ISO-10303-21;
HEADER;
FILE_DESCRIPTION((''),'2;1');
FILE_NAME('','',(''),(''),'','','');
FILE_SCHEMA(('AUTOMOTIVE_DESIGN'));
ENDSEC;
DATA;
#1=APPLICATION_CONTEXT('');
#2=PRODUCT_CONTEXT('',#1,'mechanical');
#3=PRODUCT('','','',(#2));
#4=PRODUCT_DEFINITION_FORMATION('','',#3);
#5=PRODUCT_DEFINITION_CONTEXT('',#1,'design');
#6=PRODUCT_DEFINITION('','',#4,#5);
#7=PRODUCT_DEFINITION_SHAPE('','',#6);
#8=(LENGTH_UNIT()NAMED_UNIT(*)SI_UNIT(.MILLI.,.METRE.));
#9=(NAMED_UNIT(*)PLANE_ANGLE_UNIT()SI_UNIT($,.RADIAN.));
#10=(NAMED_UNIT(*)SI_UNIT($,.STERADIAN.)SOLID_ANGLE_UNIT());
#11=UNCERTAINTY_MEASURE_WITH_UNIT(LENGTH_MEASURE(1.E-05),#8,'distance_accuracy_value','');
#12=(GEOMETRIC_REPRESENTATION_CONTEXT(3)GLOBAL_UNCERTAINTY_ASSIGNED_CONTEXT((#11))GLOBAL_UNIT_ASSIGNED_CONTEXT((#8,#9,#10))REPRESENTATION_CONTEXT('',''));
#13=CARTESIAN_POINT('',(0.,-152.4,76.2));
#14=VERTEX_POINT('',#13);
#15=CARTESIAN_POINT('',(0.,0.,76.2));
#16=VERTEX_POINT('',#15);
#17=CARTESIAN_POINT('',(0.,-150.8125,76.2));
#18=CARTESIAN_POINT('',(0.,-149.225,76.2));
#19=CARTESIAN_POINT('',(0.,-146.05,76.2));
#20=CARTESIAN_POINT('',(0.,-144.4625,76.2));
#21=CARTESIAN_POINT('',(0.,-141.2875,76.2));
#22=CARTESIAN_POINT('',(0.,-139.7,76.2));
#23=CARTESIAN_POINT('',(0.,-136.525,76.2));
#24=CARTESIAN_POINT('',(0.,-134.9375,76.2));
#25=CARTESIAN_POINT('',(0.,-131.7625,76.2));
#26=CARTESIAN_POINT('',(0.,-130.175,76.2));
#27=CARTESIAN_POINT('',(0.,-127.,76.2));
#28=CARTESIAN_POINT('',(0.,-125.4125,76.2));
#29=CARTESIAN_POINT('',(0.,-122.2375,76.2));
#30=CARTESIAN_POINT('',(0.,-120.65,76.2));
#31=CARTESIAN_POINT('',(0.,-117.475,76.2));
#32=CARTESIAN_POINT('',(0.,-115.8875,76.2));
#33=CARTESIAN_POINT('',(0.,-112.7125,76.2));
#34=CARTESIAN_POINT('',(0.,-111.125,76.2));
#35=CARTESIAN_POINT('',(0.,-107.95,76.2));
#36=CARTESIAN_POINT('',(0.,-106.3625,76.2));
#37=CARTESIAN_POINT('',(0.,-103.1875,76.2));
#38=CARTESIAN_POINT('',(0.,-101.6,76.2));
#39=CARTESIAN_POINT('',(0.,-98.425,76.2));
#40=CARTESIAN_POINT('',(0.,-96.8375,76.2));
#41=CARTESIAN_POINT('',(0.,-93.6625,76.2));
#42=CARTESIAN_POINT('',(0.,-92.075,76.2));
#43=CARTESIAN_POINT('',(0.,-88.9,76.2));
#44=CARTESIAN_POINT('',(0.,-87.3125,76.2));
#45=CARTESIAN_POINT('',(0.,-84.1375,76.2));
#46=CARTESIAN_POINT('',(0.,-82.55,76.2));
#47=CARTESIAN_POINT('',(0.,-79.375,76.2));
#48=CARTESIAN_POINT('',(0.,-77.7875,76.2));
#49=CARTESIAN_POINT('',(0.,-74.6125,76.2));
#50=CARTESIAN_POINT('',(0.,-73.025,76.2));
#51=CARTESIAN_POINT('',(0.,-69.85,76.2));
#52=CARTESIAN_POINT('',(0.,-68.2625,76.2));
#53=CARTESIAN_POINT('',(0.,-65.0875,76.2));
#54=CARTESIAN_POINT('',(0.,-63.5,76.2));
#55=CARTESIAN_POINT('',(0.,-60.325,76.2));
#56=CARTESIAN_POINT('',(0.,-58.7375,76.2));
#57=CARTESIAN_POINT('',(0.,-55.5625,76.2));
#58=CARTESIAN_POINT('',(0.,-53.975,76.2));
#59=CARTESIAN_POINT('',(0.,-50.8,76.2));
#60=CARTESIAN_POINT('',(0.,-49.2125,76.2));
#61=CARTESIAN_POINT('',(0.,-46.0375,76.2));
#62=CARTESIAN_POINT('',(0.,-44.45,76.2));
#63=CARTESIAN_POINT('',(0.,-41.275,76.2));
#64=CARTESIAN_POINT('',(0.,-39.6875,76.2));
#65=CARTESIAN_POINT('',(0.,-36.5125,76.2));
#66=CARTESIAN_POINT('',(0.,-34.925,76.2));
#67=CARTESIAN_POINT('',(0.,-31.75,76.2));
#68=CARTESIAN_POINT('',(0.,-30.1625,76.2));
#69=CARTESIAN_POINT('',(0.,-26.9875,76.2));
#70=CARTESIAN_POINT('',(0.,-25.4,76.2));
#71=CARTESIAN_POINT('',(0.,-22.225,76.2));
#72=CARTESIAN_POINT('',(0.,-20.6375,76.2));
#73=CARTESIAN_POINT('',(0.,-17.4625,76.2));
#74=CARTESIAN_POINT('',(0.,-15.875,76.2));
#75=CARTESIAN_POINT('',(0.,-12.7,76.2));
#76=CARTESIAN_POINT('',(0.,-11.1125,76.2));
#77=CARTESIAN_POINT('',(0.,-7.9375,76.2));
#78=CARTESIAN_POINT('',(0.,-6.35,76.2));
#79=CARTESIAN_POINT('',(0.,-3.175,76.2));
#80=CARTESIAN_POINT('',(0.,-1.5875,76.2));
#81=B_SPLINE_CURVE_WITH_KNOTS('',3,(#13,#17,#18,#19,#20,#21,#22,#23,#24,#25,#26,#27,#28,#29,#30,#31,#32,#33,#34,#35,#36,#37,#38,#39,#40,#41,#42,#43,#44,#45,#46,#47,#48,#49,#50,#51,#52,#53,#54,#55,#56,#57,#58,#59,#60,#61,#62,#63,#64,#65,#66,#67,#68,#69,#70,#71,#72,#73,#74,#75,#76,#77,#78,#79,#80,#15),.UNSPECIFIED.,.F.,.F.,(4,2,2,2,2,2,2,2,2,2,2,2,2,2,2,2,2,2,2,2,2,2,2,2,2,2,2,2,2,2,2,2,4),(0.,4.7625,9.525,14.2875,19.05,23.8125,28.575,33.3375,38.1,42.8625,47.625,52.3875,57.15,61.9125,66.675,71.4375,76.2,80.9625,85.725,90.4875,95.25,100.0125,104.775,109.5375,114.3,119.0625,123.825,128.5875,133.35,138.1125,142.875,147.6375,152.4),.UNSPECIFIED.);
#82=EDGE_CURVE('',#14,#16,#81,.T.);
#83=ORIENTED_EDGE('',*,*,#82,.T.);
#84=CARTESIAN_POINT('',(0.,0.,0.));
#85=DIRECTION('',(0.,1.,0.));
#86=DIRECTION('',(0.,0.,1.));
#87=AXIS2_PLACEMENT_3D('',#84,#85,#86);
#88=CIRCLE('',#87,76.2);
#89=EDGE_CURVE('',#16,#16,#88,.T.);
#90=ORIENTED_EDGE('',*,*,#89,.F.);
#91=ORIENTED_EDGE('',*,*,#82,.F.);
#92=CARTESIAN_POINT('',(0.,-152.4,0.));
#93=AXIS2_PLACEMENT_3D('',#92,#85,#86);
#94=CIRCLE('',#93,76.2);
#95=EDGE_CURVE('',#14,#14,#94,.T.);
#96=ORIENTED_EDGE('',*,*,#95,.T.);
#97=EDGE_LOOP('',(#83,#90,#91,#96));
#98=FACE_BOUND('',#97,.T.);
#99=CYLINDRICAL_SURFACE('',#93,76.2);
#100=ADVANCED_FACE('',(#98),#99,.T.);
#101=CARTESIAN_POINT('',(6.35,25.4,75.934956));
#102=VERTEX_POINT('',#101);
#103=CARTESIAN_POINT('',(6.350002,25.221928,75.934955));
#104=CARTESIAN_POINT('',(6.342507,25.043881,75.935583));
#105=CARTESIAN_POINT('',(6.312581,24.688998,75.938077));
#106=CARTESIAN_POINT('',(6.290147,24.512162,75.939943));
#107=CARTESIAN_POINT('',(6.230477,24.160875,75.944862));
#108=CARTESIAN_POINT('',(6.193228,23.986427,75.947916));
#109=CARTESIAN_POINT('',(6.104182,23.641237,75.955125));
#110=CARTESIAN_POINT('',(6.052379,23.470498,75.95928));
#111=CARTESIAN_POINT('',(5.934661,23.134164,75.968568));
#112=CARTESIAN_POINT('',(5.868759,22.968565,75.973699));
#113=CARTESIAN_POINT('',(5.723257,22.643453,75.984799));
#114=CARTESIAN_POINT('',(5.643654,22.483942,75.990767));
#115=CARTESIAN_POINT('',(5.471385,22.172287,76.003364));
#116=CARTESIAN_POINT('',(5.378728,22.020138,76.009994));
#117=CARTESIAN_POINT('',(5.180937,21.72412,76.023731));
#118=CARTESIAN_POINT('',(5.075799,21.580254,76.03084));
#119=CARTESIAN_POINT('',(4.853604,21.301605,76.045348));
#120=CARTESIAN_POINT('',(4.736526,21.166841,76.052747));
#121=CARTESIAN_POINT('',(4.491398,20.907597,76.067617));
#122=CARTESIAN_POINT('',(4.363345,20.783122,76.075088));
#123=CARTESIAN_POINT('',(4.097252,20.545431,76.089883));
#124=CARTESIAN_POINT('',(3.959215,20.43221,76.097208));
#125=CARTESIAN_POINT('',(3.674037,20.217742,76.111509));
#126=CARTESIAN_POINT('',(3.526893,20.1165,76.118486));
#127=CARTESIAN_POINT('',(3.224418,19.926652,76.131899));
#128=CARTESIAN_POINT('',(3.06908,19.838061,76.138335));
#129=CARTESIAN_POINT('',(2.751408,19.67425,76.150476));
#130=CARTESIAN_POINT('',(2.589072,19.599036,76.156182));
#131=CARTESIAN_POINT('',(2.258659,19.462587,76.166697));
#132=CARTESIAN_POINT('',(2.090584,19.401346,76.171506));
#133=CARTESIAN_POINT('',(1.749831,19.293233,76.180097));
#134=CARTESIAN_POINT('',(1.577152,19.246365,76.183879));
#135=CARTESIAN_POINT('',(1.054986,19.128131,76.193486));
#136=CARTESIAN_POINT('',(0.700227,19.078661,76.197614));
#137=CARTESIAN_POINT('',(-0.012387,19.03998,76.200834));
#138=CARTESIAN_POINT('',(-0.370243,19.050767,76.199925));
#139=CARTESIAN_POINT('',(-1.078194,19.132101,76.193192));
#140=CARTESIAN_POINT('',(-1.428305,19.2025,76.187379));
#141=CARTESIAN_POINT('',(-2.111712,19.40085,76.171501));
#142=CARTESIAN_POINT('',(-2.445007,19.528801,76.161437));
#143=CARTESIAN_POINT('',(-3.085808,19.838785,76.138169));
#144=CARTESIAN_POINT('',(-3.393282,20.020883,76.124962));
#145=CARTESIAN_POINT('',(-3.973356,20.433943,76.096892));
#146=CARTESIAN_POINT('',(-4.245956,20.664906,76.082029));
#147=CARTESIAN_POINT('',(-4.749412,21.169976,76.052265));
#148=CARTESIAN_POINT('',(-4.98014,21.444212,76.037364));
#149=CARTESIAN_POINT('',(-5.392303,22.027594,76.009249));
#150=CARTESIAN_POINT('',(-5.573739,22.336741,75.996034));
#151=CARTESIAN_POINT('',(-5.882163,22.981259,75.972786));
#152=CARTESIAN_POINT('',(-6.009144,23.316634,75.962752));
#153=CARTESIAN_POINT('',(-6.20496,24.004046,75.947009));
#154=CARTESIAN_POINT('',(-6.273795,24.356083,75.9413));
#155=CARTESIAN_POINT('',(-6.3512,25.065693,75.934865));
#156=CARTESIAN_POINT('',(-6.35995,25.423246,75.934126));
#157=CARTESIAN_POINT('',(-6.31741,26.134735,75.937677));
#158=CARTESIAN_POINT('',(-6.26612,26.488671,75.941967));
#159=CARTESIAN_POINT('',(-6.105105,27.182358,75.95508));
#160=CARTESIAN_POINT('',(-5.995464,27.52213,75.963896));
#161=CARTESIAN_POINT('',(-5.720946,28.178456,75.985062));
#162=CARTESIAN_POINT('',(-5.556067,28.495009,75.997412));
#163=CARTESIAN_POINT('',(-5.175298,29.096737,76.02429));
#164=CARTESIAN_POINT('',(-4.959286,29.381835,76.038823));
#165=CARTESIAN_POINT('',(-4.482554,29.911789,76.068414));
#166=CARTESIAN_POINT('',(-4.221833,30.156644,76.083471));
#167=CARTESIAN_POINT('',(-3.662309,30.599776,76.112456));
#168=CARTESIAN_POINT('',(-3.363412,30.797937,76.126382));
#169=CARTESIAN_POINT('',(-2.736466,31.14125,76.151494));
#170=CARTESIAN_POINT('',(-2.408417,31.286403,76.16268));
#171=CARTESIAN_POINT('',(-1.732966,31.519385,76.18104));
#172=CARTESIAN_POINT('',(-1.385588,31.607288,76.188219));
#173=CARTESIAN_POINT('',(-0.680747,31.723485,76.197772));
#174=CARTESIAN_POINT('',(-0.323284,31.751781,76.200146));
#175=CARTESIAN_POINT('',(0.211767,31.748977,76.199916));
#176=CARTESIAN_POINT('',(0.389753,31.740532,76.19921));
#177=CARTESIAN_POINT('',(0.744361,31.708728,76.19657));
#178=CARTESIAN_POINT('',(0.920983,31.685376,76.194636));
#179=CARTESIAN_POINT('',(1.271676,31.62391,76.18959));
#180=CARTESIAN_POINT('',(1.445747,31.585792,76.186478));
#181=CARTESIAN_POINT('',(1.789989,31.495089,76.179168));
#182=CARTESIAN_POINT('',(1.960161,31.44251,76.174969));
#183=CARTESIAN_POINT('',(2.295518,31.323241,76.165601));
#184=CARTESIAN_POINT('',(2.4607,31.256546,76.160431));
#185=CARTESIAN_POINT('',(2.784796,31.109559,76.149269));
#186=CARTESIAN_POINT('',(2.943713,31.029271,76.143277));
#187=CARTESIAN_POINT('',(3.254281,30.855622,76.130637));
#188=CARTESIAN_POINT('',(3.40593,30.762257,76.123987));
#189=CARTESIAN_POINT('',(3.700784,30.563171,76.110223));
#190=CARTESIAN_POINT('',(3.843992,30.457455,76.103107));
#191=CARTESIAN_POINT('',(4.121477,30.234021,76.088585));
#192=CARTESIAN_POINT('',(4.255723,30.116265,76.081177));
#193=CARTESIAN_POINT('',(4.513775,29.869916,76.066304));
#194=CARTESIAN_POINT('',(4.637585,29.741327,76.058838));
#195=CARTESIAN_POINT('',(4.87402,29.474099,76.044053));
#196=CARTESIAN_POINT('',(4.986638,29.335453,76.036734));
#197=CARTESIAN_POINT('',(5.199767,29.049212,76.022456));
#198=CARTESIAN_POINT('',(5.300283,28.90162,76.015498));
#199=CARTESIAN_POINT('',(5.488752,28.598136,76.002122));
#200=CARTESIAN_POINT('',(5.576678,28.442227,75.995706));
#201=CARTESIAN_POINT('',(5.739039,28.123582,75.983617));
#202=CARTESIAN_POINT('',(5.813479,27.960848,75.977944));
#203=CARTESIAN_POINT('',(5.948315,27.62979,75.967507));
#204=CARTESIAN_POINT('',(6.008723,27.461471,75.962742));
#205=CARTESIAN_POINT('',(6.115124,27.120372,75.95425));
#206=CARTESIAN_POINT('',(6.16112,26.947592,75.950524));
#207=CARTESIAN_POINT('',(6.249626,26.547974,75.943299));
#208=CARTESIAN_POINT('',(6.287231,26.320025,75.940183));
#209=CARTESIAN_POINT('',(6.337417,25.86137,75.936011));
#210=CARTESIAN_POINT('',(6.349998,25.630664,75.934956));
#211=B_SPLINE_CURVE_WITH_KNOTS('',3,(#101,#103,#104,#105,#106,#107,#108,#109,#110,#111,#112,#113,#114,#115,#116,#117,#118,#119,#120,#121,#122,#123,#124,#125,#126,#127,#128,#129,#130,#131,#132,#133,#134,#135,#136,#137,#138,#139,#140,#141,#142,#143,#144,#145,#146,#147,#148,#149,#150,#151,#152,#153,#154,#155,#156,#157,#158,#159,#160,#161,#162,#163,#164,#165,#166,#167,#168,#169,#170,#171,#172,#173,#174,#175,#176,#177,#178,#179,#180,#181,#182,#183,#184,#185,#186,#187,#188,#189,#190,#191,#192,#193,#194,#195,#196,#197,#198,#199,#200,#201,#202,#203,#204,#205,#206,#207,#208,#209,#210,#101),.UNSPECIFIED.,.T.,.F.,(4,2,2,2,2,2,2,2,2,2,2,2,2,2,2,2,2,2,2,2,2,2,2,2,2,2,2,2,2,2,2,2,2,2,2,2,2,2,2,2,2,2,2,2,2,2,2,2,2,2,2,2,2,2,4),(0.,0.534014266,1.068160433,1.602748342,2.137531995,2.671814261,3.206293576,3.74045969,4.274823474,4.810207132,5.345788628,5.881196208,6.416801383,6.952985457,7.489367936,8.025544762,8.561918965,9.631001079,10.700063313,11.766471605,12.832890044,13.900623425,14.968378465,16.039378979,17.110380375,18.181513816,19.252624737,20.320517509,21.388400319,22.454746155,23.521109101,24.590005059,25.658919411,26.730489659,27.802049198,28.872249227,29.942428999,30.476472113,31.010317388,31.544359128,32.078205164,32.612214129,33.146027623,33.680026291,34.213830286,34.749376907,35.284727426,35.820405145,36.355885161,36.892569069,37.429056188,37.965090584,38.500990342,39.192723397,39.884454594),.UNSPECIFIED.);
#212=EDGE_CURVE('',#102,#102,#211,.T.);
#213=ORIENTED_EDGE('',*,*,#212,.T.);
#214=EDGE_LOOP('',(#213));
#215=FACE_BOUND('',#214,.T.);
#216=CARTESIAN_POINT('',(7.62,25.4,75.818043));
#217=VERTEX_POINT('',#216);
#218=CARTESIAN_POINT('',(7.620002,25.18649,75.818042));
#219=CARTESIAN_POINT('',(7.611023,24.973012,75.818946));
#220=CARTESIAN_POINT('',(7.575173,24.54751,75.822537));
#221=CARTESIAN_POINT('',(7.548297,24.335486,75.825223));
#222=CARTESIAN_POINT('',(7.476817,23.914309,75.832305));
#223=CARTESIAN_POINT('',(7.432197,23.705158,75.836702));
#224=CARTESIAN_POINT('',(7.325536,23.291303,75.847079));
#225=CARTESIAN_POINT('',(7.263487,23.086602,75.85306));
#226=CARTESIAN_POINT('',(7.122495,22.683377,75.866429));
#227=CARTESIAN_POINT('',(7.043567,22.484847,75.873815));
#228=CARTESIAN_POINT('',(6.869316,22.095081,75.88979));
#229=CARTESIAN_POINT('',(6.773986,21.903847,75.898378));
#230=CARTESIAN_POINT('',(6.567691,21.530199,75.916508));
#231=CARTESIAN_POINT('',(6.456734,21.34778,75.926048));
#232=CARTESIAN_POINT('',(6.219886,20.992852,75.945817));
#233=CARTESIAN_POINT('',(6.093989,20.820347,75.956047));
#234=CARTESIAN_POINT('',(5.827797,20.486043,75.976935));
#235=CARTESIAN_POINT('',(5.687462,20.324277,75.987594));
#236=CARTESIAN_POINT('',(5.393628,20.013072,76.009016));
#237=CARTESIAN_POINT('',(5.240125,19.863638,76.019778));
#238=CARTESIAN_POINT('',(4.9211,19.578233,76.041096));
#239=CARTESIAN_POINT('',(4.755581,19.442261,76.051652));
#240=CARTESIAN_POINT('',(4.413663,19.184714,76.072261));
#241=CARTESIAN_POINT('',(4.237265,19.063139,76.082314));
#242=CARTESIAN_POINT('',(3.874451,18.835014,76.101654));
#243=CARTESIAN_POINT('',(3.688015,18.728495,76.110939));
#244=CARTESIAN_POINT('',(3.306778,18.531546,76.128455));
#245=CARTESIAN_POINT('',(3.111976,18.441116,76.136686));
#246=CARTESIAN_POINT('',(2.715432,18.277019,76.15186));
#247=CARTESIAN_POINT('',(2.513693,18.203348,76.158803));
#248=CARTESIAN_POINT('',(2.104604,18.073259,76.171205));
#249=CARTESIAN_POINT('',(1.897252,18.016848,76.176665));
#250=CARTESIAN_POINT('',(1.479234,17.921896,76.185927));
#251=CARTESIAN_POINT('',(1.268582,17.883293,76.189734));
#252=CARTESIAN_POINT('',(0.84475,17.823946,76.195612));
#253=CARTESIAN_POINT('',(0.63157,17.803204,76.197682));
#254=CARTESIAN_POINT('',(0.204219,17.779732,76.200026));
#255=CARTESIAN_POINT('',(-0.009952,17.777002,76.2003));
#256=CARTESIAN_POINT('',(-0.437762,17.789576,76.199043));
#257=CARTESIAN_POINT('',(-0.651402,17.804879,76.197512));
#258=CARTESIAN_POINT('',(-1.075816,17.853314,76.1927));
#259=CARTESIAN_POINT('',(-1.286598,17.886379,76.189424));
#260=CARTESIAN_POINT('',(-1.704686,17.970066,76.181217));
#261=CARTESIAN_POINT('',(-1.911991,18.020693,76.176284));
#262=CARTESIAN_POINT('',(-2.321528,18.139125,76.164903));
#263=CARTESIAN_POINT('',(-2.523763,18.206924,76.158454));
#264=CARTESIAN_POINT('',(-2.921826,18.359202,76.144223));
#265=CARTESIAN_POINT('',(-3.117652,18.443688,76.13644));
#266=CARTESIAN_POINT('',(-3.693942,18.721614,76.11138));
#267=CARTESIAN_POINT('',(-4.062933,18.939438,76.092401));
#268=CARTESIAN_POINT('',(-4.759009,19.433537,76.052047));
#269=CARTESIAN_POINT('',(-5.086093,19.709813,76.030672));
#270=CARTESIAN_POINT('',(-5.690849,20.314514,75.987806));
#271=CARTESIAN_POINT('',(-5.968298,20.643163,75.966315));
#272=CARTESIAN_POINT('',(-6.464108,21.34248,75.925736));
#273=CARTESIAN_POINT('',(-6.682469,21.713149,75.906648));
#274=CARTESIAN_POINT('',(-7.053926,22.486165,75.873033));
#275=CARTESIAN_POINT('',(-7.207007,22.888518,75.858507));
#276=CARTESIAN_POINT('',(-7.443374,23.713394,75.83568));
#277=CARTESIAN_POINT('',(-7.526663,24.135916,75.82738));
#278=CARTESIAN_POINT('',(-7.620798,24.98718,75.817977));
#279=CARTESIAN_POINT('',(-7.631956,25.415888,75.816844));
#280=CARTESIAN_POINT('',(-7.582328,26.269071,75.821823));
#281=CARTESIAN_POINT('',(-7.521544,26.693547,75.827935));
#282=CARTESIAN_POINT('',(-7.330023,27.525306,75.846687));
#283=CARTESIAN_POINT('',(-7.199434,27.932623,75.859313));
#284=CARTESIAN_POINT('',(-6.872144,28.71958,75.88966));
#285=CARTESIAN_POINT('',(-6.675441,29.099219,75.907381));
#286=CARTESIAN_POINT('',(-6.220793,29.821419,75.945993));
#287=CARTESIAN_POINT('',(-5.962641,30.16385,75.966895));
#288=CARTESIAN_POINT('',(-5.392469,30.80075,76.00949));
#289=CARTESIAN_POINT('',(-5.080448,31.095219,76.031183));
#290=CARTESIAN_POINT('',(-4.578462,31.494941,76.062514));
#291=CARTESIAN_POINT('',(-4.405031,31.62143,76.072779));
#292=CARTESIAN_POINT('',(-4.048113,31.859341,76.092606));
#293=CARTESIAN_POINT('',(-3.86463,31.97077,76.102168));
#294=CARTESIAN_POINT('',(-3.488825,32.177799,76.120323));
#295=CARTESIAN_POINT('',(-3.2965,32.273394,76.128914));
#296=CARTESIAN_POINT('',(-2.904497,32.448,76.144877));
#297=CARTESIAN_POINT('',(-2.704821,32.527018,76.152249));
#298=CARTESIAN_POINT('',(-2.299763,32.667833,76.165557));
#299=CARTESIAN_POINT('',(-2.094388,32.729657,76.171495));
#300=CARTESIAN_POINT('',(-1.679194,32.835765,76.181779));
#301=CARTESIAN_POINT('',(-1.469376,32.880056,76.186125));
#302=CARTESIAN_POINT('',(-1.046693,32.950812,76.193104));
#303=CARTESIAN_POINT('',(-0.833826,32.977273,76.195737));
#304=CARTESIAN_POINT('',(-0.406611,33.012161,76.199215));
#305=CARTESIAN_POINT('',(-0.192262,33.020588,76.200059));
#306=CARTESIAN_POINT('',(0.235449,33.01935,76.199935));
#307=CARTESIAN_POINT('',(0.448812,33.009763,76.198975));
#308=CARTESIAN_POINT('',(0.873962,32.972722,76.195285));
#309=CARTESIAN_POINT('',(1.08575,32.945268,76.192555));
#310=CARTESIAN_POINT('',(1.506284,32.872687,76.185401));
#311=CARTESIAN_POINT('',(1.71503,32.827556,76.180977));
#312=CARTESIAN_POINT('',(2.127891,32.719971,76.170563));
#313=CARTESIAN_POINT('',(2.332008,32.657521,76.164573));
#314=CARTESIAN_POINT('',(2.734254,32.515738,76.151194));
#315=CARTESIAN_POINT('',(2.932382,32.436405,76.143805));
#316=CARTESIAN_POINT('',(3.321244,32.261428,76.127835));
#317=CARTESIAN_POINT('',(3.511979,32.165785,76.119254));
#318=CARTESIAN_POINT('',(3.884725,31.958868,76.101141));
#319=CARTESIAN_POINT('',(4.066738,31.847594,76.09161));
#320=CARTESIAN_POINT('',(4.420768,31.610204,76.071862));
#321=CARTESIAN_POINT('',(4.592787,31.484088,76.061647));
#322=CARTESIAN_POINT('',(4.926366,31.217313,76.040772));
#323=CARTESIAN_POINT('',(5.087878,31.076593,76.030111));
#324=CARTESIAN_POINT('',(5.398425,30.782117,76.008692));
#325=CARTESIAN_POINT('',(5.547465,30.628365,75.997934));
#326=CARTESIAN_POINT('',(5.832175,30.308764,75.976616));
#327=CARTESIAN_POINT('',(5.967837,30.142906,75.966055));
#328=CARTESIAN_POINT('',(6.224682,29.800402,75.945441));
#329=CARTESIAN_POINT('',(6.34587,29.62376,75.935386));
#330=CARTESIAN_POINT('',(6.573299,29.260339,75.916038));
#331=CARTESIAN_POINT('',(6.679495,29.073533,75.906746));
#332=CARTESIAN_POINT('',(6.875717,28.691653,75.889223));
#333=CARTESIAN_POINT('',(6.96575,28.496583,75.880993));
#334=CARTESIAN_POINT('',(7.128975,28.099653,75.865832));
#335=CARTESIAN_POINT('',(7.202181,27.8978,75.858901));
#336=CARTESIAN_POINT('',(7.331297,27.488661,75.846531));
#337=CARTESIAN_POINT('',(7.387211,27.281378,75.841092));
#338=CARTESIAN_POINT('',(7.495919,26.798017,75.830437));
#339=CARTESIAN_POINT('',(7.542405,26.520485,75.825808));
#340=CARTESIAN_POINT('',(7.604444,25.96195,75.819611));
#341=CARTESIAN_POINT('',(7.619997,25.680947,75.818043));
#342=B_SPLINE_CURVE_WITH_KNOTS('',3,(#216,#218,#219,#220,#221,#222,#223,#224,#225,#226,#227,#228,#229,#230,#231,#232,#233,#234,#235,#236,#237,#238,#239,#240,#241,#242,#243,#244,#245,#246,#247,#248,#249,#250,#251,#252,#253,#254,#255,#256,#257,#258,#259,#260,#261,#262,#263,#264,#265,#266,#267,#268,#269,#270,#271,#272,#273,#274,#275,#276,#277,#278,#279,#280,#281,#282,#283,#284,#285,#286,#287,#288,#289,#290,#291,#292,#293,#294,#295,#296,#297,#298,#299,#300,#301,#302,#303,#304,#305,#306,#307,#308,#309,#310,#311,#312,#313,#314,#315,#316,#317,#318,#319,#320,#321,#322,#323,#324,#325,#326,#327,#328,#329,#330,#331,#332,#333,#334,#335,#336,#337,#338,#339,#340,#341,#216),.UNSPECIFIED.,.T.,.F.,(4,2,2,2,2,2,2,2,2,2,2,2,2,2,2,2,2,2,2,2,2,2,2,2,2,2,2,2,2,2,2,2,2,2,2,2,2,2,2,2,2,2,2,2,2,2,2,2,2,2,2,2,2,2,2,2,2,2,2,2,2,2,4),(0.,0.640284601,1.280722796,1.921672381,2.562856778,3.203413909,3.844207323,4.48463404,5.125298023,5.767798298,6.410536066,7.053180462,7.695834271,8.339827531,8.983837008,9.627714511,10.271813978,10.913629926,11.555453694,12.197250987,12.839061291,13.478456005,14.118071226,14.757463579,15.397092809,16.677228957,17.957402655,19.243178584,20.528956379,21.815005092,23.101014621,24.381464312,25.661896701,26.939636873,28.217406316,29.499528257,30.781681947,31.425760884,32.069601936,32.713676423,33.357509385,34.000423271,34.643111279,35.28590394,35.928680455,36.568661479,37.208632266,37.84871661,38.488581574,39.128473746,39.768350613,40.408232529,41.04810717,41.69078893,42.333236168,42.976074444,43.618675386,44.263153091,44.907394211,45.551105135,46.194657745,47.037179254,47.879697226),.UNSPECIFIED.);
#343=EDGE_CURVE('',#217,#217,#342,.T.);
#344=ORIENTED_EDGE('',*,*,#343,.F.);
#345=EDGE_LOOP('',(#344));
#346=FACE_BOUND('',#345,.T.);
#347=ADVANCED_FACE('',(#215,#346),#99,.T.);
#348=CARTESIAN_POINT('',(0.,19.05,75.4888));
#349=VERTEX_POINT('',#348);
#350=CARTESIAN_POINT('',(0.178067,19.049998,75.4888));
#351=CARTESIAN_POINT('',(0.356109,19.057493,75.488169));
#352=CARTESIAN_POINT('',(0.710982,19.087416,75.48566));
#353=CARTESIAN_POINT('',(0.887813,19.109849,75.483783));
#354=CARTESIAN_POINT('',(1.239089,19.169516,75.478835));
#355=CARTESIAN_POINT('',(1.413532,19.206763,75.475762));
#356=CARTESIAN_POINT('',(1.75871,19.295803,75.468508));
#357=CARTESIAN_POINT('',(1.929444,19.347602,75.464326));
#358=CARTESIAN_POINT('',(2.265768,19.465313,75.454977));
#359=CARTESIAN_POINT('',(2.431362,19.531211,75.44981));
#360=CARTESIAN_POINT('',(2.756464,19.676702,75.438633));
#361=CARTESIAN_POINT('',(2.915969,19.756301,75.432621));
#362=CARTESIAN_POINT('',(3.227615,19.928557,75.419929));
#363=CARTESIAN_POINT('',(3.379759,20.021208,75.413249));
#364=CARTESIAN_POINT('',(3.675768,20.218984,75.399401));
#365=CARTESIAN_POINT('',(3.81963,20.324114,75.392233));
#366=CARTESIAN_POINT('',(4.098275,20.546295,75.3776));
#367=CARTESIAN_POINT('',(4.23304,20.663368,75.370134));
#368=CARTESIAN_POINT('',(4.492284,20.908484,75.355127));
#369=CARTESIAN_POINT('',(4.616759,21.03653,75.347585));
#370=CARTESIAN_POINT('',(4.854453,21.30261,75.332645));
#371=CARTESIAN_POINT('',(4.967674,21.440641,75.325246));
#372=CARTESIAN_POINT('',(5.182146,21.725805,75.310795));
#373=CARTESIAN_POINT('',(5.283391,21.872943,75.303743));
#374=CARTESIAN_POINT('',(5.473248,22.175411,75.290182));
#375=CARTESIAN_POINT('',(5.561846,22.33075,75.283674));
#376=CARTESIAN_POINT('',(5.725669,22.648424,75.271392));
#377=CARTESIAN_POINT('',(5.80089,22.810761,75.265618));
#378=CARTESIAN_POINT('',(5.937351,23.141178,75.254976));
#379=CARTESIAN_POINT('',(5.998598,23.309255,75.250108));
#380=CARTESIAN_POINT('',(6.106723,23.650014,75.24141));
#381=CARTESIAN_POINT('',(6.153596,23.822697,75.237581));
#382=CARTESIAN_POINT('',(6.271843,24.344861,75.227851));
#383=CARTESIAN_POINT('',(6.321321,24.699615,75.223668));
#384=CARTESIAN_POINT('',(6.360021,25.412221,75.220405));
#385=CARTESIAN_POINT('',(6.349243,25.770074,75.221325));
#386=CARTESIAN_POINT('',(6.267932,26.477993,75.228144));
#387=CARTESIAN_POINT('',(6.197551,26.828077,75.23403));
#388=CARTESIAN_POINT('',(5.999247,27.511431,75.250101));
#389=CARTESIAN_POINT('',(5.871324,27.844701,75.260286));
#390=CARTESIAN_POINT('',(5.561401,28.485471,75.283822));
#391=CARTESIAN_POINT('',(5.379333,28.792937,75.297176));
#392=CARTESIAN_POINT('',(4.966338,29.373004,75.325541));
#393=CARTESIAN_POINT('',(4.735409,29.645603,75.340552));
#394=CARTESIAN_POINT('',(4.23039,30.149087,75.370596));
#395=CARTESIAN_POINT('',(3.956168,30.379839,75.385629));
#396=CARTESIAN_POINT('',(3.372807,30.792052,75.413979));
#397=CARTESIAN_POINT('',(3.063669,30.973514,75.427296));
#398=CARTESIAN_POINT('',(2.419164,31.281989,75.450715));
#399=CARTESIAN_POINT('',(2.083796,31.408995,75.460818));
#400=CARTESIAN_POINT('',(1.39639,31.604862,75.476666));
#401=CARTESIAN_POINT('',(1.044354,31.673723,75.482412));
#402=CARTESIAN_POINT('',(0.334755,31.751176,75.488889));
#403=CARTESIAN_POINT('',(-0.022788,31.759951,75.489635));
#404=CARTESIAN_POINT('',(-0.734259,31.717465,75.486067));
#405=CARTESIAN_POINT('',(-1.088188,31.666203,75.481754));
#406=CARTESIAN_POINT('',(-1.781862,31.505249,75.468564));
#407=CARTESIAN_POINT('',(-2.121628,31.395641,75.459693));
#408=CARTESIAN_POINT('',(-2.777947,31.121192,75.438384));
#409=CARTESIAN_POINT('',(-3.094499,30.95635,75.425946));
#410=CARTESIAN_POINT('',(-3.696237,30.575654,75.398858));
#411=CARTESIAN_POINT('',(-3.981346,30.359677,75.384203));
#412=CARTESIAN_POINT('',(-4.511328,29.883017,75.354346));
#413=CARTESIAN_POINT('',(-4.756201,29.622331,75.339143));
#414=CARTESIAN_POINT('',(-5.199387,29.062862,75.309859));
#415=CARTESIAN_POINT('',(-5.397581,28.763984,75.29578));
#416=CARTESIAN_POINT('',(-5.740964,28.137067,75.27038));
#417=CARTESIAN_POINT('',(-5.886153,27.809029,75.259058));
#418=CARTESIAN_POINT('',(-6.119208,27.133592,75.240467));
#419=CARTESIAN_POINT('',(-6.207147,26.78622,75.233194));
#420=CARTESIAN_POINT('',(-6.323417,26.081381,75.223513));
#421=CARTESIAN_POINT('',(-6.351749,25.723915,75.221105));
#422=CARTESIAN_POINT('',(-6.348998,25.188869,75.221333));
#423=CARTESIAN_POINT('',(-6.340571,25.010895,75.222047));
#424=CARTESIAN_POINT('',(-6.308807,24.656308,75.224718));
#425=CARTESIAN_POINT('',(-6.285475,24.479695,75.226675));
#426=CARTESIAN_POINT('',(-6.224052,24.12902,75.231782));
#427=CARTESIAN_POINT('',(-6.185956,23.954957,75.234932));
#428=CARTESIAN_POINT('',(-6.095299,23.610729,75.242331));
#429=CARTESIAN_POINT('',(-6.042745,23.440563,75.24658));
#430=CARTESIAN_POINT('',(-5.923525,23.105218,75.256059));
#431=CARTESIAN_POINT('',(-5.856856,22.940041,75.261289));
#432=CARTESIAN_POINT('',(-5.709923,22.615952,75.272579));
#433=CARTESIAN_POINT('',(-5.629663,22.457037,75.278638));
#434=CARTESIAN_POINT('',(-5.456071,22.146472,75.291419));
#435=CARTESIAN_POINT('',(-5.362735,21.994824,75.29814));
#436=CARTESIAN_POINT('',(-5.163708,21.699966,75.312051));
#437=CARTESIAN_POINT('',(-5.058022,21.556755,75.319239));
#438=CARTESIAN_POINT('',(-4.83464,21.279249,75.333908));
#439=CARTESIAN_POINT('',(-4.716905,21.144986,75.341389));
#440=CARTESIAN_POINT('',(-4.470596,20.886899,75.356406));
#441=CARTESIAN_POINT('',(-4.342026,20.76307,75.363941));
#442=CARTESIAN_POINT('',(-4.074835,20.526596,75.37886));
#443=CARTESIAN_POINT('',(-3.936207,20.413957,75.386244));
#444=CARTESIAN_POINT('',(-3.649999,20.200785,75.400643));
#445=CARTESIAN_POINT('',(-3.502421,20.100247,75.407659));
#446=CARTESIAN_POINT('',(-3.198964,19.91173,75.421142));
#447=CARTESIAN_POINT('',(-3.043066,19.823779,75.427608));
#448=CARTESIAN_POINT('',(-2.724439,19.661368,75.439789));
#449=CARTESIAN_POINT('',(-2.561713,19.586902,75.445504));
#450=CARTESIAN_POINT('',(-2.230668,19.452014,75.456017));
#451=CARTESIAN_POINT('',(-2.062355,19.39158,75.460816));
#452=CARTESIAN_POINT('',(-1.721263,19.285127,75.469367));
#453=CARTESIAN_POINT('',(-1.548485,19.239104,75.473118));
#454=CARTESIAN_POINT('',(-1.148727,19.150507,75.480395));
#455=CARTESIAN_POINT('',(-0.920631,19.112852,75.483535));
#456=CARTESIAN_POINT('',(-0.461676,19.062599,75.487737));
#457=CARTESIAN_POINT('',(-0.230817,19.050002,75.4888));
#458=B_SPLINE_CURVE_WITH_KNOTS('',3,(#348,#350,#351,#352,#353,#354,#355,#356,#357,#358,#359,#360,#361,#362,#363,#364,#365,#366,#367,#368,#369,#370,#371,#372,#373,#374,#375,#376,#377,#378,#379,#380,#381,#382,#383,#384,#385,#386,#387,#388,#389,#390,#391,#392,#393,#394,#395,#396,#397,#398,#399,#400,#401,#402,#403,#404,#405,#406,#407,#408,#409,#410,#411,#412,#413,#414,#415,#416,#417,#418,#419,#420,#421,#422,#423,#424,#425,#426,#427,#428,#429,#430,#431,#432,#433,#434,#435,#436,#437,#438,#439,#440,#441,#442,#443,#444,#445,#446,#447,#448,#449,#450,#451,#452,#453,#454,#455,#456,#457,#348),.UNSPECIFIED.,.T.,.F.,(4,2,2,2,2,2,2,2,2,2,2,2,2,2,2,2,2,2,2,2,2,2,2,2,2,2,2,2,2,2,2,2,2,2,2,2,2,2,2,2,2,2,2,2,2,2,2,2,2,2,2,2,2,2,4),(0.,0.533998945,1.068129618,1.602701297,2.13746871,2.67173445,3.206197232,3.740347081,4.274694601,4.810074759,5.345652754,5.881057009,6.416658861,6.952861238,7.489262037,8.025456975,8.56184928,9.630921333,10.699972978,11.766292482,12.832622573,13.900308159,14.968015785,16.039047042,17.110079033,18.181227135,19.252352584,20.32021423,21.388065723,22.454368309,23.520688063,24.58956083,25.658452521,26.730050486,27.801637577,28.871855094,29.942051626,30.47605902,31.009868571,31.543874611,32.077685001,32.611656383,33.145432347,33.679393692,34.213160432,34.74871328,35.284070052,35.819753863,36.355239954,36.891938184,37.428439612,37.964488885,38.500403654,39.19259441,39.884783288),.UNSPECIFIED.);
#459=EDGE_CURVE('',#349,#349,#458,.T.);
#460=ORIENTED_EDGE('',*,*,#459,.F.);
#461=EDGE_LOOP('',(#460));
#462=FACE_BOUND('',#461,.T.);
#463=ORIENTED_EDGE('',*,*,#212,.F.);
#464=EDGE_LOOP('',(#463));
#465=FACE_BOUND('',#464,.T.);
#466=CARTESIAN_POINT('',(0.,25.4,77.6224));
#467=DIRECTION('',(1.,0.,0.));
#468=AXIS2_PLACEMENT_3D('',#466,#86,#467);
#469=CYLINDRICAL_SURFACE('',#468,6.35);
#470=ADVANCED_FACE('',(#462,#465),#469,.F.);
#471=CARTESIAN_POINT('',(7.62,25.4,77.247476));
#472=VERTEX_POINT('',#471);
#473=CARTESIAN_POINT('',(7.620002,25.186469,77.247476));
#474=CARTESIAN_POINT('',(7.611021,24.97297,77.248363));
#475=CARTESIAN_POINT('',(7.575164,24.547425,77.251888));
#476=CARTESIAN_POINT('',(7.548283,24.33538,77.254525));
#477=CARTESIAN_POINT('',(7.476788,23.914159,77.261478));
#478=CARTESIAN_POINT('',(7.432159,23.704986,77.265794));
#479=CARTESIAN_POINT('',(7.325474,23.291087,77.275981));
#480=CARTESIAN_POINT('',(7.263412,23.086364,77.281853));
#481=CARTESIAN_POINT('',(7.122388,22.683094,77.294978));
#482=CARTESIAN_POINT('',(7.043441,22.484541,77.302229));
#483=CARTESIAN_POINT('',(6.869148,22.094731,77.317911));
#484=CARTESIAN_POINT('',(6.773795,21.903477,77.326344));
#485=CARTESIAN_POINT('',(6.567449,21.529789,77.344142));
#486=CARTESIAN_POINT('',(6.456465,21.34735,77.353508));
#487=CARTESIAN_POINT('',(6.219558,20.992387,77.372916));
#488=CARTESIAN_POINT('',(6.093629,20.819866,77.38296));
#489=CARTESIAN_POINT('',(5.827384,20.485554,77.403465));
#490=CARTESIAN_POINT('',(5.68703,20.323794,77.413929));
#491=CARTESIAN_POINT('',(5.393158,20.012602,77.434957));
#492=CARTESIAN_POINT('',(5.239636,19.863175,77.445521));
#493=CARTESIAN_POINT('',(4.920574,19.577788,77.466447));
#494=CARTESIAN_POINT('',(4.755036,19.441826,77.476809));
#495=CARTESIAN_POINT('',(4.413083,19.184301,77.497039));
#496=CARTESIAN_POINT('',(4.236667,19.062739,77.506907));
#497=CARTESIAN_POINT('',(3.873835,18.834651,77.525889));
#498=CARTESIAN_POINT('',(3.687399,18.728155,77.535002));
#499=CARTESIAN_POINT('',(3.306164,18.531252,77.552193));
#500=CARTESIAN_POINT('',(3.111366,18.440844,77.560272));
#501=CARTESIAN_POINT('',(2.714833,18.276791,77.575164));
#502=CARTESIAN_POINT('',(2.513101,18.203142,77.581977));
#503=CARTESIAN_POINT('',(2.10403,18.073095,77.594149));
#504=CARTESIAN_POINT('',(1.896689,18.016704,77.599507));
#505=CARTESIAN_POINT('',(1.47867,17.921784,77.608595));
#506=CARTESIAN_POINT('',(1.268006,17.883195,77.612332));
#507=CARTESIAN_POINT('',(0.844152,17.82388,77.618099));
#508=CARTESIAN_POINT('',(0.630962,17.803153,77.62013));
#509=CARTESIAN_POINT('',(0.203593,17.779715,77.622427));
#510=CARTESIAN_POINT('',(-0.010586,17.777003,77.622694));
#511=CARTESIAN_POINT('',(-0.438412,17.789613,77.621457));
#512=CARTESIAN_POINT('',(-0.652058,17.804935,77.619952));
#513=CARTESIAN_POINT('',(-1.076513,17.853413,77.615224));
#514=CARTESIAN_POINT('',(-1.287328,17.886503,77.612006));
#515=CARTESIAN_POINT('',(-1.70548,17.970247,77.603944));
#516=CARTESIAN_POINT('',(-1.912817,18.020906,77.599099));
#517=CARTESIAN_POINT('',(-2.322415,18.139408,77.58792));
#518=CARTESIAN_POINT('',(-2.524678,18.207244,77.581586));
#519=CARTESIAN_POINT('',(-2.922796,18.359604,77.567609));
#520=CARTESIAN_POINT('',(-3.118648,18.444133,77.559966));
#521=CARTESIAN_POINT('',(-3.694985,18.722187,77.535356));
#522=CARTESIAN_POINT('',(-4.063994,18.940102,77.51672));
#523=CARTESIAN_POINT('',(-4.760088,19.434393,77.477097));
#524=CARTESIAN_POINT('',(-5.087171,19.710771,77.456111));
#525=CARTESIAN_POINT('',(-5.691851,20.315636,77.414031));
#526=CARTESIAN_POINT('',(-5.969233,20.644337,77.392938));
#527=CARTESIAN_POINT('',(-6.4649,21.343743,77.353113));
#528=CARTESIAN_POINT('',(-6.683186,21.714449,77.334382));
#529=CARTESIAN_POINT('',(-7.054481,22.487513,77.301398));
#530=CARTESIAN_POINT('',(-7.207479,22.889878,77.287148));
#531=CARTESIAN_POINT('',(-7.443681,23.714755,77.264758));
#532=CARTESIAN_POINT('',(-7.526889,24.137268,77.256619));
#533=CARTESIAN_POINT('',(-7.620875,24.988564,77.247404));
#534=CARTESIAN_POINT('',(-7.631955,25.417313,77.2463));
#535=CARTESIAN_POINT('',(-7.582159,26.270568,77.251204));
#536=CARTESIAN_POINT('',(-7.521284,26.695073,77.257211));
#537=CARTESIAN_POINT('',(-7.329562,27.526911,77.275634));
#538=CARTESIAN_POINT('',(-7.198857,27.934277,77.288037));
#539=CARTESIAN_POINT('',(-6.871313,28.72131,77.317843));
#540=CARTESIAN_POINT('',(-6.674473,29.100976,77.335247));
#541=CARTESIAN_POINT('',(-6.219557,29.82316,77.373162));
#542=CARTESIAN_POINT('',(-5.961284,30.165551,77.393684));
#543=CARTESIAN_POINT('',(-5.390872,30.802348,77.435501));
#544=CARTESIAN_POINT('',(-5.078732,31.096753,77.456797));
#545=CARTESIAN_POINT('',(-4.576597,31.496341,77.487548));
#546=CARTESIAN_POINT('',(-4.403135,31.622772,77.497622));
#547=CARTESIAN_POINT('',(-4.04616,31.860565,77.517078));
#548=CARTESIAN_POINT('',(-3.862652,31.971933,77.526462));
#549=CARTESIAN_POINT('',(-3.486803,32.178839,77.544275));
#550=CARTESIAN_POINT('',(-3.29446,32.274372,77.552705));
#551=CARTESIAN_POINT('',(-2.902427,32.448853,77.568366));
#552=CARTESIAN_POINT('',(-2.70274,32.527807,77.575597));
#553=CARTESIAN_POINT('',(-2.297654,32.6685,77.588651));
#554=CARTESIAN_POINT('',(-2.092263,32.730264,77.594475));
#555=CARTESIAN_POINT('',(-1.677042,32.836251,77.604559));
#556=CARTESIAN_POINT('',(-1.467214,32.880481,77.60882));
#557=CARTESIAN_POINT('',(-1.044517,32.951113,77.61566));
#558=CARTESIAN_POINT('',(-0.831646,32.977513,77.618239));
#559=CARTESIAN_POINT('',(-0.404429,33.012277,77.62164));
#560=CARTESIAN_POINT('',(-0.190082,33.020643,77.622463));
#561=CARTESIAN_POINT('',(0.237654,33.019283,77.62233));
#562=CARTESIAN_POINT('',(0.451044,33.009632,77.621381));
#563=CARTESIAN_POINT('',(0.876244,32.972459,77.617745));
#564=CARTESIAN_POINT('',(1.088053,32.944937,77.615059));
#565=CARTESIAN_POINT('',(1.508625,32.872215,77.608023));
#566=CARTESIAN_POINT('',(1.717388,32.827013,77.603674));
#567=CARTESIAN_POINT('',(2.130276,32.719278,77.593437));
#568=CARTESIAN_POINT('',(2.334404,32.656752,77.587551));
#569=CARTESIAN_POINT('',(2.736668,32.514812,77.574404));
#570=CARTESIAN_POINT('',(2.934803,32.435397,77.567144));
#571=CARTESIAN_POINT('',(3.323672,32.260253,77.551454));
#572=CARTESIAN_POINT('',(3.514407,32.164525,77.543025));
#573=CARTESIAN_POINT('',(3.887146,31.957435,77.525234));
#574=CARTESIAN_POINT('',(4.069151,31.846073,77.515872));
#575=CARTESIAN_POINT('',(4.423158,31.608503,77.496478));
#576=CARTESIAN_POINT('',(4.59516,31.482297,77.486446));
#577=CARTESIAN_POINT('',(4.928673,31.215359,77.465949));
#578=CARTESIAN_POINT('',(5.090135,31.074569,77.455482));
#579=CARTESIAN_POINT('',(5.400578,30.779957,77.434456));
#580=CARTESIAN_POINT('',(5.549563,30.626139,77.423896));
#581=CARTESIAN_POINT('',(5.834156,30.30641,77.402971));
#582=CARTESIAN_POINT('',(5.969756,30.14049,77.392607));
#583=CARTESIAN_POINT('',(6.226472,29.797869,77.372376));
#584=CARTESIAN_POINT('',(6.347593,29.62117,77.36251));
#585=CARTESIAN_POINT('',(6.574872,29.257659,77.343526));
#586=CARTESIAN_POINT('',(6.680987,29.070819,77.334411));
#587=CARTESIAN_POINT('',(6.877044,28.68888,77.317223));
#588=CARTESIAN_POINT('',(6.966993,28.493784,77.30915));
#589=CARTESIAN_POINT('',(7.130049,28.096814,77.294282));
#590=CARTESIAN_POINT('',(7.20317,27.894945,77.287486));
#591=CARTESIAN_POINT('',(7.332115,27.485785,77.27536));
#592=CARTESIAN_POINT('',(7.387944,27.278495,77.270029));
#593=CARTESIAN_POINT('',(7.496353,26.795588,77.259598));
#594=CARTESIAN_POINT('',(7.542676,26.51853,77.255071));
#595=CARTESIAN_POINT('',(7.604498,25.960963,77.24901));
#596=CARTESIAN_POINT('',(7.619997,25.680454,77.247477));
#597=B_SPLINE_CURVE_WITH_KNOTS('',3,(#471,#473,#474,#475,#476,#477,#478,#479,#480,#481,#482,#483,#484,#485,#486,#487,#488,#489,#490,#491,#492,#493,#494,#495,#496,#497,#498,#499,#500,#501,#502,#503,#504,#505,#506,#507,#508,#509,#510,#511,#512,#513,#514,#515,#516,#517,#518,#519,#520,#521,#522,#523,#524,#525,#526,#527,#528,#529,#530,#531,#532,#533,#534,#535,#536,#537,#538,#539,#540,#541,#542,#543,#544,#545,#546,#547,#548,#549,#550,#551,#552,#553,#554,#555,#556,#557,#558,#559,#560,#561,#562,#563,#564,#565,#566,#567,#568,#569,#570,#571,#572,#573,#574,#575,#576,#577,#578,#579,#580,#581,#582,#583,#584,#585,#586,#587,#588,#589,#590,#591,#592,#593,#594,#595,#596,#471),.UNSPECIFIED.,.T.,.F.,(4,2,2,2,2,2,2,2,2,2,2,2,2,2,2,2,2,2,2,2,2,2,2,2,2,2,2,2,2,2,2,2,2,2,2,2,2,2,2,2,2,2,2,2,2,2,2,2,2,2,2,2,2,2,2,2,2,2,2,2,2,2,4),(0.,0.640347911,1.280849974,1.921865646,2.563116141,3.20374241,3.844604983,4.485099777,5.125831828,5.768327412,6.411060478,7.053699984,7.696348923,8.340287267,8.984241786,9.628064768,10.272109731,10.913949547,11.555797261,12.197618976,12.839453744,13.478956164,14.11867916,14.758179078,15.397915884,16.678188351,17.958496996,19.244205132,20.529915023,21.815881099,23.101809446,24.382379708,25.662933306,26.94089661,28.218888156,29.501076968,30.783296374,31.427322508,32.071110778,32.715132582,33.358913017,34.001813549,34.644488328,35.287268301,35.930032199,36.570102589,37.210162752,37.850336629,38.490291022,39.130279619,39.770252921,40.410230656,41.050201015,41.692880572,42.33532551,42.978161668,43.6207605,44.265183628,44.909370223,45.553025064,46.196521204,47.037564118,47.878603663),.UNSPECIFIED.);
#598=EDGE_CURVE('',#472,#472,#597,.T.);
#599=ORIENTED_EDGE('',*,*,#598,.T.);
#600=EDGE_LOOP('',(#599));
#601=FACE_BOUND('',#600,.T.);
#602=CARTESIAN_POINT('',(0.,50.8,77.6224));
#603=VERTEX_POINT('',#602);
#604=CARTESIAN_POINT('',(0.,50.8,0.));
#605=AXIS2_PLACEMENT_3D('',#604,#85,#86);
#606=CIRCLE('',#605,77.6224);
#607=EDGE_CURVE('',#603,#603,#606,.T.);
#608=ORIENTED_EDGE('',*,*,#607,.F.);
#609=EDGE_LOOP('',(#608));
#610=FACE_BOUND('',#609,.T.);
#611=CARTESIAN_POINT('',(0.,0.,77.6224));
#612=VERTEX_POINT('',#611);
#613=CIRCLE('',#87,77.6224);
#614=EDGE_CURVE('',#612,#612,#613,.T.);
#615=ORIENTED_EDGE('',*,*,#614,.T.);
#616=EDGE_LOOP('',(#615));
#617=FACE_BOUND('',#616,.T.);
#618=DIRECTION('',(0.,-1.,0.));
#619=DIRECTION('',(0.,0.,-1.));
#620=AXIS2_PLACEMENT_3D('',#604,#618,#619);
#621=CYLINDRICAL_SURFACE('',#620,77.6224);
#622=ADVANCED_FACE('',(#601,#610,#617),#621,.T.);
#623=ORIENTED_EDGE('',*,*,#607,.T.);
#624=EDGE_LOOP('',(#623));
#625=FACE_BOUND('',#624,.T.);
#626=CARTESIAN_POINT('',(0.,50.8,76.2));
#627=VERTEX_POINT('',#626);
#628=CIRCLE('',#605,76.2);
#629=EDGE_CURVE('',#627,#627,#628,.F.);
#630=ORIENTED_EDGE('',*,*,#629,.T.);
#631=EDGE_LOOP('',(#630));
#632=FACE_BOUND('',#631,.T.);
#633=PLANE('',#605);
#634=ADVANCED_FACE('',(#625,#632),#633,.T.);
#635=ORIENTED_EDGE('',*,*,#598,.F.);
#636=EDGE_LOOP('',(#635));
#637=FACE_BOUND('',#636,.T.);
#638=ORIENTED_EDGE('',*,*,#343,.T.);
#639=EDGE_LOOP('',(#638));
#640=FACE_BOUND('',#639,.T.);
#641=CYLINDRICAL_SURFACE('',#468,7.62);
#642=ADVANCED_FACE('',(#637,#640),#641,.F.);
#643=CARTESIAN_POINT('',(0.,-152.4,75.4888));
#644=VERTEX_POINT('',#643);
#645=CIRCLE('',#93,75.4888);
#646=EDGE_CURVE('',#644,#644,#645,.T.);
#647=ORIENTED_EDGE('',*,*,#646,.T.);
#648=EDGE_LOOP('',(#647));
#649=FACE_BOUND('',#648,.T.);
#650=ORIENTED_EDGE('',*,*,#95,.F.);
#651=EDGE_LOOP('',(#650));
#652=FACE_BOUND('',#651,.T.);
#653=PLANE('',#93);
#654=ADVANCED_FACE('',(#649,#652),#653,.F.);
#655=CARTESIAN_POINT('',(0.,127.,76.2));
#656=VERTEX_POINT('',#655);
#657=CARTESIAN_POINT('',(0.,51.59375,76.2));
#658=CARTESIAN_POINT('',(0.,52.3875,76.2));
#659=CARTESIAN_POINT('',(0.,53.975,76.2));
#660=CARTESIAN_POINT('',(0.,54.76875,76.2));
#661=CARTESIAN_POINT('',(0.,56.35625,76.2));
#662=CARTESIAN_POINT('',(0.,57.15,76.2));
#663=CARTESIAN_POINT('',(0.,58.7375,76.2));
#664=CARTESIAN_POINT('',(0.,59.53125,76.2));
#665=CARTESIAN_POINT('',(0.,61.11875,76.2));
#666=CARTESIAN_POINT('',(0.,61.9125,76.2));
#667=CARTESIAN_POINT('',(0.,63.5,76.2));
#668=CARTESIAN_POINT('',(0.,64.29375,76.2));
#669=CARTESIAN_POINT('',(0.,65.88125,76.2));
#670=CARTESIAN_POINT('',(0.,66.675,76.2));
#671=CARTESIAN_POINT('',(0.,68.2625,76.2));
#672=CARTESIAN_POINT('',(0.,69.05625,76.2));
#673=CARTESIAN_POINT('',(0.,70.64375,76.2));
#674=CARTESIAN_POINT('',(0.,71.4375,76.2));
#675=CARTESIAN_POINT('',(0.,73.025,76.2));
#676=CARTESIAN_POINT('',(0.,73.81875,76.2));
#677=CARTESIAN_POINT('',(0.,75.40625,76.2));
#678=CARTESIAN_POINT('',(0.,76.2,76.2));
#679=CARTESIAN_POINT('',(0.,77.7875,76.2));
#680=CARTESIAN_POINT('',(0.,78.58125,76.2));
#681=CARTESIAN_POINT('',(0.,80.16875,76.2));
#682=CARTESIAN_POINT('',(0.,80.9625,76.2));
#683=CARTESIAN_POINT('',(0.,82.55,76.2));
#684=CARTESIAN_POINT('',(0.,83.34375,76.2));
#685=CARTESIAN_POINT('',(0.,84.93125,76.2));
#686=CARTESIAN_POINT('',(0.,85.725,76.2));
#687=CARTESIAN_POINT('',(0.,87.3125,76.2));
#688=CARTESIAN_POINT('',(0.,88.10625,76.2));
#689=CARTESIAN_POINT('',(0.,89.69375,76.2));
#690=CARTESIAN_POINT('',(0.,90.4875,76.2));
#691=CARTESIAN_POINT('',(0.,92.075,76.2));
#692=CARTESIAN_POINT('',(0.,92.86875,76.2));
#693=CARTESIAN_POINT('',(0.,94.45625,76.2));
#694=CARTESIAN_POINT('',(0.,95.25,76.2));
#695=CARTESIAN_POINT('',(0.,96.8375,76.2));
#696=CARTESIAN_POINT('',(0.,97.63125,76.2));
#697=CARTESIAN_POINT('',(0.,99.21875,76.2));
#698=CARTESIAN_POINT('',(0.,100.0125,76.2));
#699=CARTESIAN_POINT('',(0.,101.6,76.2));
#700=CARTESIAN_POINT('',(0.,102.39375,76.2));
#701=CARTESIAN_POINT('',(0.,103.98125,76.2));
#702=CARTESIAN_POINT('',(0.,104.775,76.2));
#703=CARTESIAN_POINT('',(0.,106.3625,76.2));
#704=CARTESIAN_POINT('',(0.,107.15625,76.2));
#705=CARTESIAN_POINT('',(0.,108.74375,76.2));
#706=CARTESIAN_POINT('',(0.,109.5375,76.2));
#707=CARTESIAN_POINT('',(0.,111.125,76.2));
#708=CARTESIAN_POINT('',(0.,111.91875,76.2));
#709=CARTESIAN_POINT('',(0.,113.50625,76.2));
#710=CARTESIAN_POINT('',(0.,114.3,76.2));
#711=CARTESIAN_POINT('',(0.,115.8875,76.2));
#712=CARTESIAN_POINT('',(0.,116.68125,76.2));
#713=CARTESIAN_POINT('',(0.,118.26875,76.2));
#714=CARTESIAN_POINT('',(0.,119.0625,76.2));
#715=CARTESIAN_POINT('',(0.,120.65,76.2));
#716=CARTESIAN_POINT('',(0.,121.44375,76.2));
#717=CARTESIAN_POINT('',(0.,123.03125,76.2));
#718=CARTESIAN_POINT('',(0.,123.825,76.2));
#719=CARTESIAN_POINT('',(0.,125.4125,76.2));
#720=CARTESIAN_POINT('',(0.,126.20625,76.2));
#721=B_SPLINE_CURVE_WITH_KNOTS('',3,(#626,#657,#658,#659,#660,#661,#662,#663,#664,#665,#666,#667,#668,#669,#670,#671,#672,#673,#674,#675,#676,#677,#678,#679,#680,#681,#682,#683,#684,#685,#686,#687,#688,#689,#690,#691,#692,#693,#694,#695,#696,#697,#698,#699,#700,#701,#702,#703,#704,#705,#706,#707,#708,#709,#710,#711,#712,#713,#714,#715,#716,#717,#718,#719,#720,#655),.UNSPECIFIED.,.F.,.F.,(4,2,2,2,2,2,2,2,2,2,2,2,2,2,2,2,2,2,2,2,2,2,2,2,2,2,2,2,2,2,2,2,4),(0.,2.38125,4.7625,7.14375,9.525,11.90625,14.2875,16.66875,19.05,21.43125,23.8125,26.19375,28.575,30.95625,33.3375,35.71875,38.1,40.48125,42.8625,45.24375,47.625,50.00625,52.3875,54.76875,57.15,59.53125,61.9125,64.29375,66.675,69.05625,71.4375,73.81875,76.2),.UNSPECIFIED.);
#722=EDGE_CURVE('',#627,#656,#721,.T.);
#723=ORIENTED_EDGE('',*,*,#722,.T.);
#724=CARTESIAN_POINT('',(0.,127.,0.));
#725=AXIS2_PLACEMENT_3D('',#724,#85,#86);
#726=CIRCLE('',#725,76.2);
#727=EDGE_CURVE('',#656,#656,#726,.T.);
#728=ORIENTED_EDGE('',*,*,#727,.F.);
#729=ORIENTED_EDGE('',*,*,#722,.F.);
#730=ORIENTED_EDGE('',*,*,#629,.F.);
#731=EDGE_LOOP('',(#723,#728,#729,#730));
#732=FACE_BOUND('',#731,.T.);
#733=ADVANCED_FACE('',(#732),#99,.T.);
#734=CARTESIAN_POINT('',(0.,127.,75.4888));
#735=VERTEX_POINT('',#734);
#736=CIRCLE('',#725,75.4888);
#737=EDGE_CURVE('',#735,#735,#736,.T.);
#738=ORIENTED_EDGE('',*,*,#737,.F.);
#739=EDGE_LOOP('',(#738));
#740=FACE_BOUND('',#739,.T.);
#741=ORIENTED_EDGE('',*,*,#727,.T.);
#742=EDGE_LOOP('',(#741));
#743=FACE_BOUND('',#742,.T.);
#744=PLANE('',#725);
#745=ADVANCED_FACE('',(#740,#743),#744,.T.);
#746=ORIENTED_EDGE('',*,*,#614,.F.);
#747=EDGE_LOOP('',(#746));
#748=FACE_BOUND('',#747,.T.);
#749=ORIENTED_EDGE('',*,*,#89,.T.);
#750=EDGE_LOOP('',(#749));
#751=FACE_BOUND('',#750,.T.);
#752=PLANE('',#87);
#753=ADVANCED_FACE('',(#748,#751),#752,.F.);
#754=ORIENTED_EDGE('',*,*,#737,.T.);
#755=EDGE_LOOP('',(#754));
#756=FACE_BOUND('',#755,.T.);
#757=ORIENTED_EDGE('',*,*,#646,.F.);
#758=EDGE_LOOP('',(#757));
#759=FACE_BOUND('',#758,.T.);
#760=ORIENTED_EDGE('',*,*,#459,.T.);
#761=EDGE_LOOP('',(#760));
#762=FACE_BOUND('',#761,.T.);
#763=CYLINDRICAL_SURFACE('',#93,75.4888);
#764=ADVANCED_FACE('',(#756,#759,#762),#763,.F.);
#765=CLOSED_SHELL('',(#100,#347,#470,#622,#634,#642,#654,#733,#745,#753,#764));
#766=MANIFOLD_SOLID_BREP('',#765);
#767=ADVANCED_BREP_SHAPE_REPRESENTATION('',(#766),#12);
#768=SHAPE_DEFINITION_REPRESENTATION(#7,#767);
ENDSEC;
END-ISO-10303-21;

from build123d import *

# Parameters (mm, degrees)
BOSS_EXTRUDE1_DEPTH                  = 127
BOSS_EXTRUDE1_DEPTH_BACK             = 152.4
SKETCH1_R                            = 76.2
SKETCH1_R_2                          = 75.4888
SKETCH2_R                            = 77.6224
SKETCH2_R_2                          = 76.2
BOSS_EXTRUDE2_DEPTH                  = 50.8
F_1_2_0_5_DIAMETER_HOLE2_REACH       = 232.98
F_1_2_0_5_DIAMETER_HOLE2_BORE_R      = 6.35
F_1_2_START                          = 75.818042607
F_1_2_0_6_DIAMETER_HOLE1_OUTLINE_R   = 7.62
F_1_2_0_6_DIAMETER_HOLE1_OUTLINE_R_2 = 6.35
F_1_2_0_6_DIAMETER_HOLE1_DEPTH       = 3.181957393
F_1_2_START_2                        = 17
F_1_2_0_6_DIAMETER_HOLE1_2_DEPTH     = 17
F_1_2_START_3                        = 75.818042657
F_1_2_0_6_DIAMETER_HOLE1_3_OUTLINE_R = 6.35
F_1_2_0_6_DIAMETER_HOLE1_3_DEPTH     = 1.181957343


with BuildPart() as part:
    # Sketch1 → Boss-Extrude1 (new, two sides: drawn at the far end of the back side and taken through both)
    with BuildSketch(Plane(origin=(0, 0, 0), x_dir=(1, 0, 0), z_dir=(0, 1, 0)).offset(-BOSS_EXTRUDE1_DEPTH_BACK)):
        with Locations(Location((0, 0, 0), (0, 0, 270))):
            Circle(SKETCH1_R)
        with Locations(Location((0, 0, 0), (0, 0, 270))):
            Circle(SKETCH1_R_2, mode=Mode.SUBTRACT)
    extrude(amount=BOSS_EXTRUDE1_DEPTH + BOSS_EXTRUDE1_DEPTH_BACK)

    # Sketch2 → Boss-Extrude2 (add)
    with BuildSketch(Plane(origin=(0, 0, 0), x_dir=(1, 0, 0), z_dir=(0, 1, 0))):
        with Locations(Location((0, 0, 0), (0, 0, 270))):
            Circle(SKETCH2_R)
        with Locations(Location((0, 0, 0), (0, 0, 270))):
            Circle(SKETCH2_R_2, mode=Mode.SUBTRACT)
    extrude(amount=BOSS_EXTRUDE2_DEPTH)

    # 1/2 (0.5) Diameter Hole2 bore → 1/2 (0.5) Diameter Hole2 (cut, up to next)
    with BuildSketch(Plane.XY.offset(77.6224), mode=Mode.PRIVATE) as f_1_2_0_5_diameter_hole2_sk1:
        with Locations((0, 25.4)):
            Circle(F_1_2_0_5_DIAMETER_HOLE2_BORE_R)
    f_1_2_0_5_diameter_hole2_tool1 = extrude(f_1_2_0_5_diameter_hole2_sk1.sketch, amount=-F_1_2_0_5_DIAMETER_HOLE2_REACH, mode=Mode.PRIVATE) & part.part
    add(f_1_2_0_5_diameter_hole2_tool1.solids().sort_by_distance((0, 25.4, 77.6224))[0], mode=Mode.SUBTRACT)

    # 1/2 (0.6) Diameter Hole1: read off the stored shape, not the designer's step
    # 1/2 (0.6) Diameter Hole1 outline → 1/2 (0.6) Diameter Hole1 (cut)
    with BuildSketch(Plane.XY.offset(F_1_2_START)):
        with Locations((0, 25.4)):
            Circle(F_1_2_0_6_DIAMETER_HOLE1_OUTLINE_R)
        with Locations((0, 25.4)):
            Circle(F_1_2_0_6_DIAMETER_HOLE1_OUTLINE_R_2, mode=Mode.SUBTRACT)
    extrude(amount=F_1_2_0_6_DIAMETER_HOLE1_DEPTH, mode=Mode.SUBTRACT)

    # 1_2 _0.6_ Diameter Hole1 2 outline → 1_2 _0.6_ Diameter Hole1 2 (add)
    with BuildSketch(Plane(origin=(0, 0, 0), x_dir=(1, 0, 0), z_dir=(0, 1, 0)).offset(F_1_2_START_2)):
        with BuildLine():
            Line((7.620000605, -75.818042647), (-7.62000001, -75.818042706))
            ThreePointArc((-7.62000001, -75.818042706), (2.99e-07, -76.2), (7.620000605, -75.818042647))
        make_face()
    extrude(amount=F_1_2_0_6_DIAMETER_HOLE1_2_DEPTH)

    # 1_2 _0.6_ Diameter Hole1 3 outline → 1_2 _0.6_ Diameter Hole1 3 (cut)
    with BuildSketch(Plane.XY.offset(F_1_2_START_3)):
        with Locations((0, 25.4)):
            Circle(F_1_2_0_6_DIAMETER_HOLE1_3_OUTLINE_R)
    extrude(amount=F_1_2_0_6_DIAMETER_HOLE1_3_DEPTH, mode=Mode.SUBTRACT)


solid = part.part
